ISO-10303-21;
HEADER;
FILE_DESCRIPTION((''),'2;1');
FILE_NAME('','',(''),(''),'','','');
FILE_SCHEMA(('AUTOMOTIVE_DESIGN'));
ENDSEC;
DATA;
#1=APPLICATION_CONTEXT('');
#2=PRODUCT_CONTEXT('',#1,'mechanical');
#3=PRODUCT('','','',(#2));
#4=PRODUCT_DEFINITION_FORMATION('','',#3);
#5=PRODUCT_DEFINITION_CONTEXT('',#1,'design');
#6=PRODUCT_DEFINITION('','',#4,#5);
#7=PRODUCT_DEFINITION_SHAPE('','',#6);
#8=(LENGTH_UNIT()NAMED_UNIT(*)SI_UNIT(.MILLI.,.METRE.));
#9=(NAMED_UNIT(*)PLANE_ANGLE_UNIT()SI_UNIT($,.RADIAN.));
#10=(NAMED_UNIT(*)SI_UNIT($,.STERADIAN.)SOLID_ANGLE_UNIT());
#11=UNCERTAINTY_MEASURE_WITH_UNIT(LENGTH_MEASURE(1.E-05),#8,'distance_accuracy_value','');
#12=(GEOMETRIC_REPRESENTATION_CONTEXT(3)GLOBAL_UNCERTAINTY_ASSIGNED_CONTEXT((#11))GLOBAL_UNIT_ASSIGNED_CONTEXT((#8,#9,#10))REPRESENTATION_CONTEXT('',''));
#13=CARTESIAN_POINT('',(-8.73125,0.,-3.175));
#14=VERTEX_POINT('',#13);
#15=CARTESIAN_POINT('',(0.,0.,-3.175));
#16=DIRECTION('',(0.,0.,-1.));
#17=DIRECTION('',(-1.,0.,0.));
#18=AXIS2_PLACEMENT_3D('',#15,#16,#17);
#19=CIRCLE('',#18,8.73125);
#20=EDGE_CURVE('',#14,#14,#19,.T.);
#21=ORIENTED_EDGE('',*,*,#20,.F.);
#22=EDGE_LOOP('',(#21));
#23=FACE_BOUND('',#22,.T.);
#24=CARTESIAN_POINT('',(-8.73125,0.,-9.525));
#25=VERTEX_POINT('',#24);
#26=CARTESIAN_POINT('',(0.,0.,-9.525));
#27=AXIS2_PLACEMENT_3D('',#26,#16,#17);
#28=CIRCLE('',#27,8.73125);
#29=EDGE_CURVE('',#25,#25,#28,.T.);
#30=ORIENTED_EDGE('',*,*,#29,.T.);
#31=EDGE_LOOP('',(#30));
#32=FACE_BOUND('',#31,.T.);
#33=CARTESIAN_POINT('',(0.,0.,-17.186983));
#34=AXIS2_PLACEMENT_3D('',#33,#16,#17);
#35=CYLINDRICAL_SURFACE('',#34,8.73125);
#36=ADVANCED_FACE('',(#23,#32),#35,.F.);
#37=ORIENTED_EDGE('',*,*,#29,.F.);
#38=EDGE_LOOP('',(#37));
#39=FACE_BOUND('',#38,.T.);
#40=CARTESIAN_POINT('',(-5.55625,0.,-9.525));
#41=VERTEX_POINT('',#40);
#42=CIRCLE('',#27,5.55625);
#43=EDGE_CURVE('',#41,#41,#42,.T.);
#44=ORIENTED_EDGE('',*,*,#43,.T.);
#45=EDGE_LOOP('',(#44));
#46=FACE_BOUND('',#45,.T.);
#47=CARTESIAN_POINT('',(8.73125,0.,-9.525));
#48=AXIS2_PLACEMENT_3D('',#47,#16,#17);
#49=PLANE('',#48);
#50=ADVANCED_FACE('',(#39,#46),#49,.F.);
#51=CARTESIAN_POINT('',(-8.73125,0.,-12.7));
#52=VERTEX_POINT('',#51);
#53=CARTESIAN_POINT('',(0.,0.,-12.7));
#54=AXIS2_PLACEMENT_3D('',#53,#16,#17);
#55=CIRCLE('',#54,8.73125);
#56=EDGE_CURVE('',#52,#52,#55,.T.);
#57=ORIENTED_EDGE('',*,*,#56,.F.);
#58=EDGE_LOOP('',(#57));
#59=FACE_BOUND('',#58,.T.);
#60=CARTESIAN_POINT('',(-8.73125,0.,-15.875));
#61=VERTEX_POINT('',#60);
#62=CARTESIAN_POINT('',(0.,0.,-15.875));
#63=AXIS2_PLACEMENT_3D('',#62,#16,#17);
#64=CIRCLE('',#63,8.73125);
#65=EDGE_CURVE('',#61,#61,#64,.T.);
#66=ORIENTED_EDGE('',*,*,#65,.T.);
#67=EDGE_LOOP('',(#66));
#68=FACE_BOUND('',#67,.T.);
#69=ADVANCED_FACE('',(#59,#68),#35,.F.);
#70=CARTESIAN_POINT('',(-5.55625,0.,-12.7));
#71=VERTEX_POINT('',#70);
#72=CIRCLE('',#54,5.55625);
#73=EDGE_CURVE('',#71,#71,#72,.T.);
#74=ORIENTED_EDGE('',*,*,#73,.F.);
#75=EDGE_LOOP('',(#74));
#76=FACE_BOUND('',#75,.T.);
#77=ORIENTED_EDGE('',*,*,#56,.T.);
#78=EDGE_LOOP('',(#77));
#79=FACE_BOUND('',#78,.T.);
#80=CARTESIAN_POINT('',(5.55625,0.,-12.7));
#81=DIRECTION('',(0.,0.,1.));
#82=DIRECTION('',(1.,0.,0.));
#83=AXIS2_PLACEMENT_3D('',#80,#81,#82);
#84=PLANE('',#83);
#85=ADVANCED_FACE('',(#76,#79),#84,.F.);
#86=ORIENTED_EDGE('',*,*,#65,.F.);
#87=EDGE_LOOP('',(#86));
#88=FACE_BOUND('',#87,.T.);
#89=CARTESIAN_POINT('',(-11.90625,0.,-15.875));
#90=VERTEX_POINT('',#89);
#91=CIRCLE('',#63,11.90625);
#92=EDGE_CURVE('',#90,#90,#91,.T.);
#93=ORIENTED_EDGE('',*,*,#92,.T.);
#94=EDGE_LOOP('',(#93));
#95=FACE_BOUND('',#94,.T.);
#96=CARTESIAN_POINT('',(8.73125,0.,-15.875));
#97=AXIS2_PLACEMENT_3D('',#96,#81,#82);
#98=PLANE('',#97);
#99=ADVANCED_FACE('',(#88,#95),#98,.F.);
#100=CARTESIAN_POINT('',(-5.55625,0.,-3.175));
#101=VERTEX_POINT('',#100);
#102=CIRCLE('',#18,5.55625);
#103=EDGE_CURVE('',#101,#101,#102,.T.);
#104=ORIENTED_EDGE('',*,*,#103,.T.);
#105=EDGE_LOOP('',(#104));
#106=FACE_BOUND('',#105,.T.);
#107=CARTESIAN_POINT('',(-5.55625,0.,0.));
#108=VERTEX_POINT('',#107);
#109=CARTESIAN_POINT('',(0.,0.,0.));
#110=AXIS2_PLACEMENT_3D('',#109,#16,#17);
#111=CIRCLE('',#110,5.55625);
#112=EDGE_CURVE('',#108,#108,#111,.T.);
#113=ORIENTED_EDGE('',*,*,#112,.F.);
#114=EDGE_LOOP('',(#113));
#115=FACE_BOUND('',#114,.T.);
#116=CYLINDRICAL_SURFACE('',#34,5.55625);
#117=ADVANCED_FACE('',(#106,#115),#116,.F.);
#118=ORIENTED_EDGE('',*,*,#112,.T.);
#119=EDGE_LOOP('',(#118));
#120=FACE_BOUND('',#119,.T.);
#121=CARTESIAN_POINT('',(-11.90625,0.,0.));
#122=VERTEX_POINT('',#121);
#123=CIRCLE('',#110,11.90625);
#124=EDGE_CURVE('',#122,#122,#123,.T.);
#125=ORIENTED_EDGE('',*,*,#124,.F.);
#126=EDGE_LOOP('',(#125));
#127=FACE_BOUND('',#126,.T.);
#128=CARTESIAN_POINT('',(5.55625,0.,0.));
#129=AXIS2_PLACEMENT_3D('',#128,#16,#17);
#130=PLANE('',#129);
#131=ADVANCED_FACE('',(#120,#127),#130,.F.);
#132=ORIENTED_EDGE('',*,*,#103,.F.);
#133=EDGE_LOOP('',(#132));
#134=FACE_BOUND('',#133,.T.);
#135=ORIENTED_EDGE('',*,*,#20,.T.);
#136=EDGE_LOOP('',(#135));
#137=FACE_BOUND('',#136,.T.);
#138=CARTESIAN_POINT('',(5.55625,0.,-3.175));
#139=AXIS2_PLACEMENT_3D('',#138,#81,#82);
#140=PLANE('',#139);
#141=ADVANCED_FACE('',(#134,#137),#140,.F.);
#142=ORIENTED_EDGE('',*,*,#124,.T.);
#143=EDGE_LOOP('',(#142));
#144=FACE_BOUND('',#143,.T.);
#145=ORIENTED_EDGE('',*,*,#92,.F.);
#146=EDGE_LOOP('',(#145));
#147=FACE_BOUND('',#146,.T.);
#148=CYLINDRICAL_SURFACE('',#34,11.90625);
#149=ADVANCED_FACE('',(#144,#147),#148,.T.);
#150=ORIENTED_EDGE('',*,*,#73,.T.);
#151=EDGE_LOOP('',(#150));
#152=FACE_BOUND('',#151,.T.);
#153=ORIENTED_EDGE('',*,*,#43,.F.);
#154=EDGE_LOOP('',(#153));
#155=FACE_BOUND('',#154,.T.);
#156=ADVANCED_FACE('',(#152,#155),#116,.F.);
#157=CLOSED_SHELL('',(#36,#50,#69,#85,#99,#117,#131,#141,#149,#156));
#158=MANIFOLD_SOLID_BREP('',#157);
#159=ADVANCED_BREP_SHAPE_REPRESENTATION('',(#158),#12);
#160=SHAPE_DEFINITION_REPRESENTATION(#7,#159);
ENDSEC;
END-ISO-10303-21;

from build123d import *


with BuildPart() as part:
    # Sketch1 → Revolve1 (revolve)
    with BuildSketch(Plane(origin=(0, 0, 0), x_dir=(1, 0, 0), z_dir=(0, 1, 0))):
        Polygon((5.55625, 0), (11.90625, 0), (11.90625, 15.875), (8.73125, 15.875), (8.73125, 12.7), (5.55625, 12.7), (5.55625, 9.525), (8.73125, 9.525), (8.73125, 3.175), (5.55625, 3.175), align=None)
    revolve(axis=Axis((0, 0, -17.186983471), (0, 0, 1)))


solid = part.part
